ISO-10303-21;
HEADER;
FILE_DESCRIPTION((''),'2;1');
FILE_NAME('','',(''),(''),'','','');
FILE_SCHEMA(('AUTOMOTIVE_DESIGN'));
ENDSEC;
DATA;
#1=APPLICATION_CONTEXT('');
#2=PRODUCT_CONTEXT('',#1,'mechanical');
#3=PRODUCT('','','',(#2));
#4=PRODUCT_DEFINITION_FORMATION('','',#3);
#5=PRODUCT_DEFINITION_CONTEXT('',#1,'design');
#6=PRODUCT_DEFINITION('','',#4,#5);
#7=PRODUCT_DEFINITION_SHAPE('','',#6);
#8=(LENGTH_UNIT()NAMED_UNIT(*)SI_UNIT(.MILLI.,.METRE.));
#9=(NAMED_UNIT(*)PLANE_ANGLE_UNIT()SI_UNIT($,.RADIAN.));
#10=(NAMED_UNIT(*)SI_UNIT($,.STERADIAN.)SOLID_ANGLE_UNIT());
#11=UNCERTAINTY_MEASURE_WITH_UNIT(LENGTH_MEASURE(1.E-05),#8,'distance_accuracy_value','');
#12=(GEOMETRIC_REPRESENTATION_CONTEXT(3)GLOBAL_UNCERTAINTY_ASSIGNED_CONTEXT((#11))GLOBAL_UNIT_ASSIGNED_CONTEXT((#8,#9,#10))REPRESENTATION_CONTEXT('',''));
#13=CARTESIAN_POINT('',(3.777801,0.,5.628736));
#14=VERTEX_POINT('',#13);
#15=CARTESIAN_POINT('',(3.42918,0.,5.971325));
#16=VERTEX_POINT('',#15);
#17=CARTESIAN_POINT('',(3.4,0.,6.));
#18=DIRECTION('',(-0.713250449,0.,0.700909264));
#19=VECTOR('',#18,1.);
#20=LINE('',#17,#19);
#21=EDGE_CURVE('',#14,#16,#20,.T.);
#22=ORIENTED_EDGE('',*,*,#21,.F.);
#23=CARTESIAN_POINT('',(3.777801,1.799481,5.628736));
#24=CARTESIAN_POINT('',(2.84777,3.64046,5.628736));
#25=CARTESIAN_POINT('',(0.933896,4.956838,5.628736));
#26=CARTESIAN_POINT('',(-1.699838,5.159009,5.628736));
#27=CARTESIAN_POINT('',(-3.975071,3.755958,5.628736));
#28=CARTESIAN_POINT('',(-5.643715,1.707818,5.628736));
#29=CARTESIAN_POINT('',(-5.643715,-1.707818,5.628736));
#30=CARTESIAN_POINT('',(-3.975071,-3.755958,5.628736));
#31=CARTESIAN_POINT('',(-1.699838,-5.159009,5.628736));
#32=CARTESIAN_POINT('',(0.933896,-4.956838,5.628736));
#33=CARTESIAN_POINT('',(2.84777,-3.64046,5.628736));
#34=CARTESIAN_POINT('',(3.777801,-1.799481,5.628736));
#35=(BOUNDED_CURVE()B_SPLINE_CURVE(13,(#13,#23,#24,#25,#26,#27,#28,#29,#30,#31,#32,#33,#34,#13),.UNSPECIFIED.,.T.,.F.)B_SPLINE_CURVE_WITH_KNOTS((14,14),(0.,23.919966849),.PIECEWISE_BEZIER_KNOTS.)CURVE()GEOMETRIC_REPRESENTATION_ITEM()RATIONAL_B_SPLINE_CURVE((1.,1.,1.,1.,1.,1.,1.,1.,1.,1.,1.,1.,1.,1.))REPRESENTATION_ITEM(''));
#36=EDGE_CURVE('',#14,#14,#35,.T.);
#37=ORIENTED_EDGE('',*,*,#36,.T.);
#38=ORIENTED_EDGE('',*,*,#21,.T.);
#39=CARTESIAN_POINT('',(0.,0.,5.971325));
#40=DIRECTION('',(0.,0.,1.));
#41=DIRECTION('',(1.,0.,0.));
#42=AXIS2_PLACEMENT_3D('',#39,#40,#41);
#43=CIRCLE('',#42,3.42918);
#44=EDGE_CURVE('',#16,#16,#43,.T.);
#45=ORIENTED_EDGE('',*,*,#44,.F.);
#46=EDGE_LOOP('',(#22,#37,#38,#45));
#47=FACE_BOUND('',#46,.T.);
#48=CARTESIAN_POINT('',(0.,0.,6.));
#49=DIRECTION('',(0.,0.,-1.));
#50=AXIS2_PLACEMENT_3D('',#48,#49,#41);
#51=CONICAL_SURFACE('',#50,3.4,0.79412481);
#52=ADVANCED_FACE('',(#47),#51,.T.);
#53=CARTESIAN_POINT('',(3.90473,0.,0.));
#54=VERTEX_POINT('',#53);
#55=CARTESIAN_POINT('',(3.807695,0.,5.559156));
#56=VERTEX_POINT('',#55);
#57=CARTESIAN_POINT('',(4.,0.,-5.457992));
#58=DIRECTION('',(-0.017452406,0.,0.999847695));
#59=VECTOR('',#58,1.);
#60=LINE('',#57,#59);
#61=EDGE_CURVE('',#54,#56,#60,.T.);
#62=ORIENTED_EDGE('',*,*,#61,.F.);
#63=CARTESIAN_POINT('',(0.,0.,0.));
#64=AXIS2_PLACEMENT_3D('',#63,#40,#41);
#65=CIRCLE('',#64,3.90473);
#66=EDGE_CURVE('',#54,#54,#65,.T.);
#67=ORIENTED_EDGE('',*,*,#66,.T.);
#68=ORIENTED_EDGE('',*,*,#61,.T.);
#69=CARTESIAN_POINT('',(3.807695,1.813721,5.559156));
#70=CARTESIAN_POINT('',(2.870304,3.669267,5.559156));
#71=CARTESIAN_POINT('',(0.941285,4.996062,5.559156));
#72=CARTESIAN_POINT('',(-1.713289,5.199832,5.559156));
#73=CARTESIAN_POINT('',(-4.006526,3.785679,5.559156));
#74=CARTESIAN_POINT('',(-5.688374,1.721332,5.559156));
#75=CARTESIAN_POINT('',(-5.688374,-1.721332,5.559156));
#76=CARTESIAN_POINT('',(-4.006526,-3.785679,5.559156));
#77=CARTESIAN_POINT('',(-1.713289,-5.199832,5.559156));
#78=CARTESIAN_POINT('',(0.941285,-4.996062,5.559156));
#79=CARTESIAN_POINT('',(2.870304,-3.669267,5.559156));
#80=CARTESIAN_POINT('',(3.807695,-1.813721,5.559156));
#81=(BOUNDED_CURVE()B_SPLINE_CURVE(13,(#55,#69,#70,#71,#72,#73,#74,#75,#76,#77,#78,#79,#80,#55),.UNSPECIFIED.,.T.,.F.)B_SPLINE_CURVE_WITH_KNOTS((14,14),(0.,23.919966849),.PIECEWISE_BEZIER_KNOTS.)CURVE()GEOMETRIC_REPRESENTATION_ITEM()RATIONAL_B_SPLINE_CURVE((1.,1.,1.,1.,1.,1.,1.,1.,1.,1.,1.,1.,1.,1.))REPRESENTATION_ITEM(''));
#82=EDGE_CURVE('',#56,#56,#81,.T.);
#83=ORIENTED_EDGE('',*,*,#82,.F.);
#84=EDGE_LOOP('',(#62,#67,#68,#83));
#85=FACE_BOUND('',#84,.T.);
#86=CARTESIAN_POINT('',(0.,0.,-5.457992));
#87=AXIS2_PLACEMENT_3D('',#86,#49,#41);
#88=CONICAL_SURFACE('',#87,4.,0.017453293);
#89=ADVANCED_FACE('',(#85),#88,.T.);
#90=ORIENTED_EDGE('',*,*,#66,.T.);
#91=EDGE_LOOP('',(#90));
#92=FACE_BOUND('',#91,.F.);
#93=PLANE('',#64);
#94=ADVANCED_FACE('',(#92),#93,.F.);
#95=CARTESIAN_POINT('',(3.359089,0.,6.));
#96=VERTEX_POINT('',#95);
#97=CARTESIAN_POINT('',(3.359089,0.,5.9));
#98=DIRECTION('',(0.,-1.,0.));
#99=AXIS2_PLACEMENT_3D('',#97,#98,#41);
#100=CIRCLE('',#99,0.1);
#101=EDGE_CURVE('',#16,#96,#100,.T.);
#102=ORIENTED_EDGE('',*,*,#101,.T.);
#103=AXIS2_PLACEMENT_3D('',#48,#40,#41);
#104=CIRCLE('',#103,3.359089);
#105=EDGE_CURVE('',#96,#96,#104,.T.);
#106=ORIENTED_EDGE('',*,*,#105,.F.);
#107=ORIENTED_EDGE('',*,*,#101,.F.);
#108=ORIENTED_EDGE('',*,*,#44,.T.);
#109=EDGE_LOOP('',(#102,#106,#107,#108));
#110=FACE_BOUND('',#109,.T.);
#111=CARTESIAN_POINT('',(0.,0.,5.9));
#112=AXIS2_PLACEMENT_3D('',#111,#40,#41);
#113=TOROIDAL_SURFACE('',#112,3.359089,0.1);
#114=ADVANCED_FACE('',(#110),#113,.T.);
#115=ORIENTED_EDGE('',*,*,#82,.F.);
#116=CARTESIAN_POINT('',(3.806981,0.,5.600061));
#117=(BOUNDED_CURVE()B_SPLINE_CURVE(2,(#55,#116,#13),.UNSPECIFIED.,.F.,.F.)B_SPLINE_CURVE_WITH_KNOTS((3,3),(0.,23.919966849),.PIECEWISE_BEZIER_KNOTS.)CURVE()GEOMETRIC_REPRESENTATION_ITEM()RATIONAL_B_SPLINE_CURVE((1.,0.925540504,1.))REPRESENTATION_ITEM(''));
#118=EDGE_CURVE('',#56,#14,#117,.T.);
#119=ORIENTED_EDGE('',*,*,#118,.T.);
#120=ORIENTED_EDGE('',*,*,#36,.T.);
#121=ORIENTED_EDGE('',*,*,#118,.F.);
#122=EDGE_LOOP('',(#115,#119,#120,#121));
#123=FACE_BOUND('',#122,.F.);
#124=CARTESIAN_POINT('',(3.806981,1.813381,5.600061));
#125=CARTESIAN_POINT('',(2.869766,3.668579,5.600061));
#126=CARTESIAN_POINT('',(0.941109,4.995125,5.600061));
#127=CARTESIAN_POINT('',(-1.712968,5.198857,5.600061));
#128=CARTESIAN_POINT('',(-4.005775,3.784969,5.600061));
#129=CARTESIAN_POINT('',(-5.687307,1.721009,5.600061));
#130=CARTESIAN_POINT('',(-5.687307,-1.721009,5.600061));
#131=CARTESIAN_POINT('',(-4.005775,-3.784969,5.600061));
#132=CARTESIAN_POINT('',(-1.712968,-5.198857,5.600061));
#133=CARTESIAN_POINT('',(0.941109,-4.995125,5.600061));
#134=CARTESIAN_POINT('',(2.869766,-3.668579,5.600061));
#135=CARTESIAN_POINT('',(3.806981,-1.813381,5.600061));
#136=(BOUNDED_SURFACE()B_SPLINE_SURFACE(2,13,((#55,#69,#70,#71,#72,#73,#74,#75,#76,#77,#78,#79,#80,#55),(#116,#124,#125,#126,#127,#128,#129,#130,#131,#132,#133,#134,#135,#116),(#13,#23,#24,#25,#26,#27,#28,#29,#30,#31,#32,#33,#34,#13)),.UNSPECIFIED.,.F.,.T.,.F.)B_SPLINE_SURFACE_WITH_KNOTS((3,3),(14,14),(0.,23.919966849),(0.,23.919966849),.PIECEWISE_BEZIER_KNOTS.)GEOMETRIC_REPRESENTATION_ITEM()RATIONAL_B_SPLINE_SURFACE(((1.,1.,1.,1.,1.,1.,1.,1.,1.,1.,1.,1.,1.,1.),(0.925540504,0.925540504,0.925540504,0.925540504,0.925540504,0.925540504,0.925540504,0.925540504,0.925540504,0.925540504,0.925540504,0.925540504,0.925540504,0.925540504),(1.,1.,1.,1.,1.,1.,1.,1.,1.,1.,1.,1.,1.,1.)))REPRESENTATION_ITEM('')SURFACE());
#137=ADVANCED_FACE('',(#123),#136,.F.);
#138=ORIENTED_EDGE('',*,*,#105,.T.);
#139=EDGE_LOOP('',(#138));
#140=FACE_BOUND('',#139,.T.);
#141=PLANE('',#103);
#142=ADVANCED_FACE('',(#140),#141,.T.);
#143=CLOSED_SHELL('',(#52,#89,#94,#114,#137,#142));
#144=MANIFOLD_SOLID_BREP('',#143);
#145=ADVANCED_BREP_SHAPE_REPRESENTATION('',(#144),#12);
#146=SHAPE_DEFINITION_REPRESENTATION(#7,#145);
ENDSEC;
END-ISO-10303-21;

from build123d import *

# Parameters (mm, degrees)
F0_R     = 4
F1_DEPTH = 6
F3_SIZE  = 0.4
F4_R     = 0.1


# Not quite as in the source:
# - a fillet or chamfer that OpenCascade refuses, or shapes differently, is made with other operations: its cross-section is extruded or revolved along the edge and cut away or added


with BuildPart() as f1:
    # F0 (on Top) → F1 (new body)
    with BuildSketch(Plane.XY):
        Circle(F0_R)
    extrude(amount=F1_DEPTH)

    # F2: chamfer of 0.2 x 11.4579923262 on 1 edges, made by hand

    # F2_s1 → F2_t2 (revolve, cut)
    with BuildSketch(Plane.XZ):
        Polygon((4, -5.4579923262), (3.8, 6), (4, 6), align=None)
    revolve(axis=Axis((0, 0, 6), (0, 0, 1)), mode=Mode.SUBTRACT)

    # F3
    f3_edges = [f1.edges().sort_by_distance(p)[0] for p in [
        (-3.8, 0, 6),
    ]]
    chamfer(f3_edges, length=F3_SIZE)

    # F4
    f4_edges = [f1.edges().sort_by_distance(p)[0] for p in [
        (-3.4, 0, 6),
        (-3.806981, 0, 5.600061),
    ]]
    fillet(f4_edges, radius=F4_R)


solid = f1.part
